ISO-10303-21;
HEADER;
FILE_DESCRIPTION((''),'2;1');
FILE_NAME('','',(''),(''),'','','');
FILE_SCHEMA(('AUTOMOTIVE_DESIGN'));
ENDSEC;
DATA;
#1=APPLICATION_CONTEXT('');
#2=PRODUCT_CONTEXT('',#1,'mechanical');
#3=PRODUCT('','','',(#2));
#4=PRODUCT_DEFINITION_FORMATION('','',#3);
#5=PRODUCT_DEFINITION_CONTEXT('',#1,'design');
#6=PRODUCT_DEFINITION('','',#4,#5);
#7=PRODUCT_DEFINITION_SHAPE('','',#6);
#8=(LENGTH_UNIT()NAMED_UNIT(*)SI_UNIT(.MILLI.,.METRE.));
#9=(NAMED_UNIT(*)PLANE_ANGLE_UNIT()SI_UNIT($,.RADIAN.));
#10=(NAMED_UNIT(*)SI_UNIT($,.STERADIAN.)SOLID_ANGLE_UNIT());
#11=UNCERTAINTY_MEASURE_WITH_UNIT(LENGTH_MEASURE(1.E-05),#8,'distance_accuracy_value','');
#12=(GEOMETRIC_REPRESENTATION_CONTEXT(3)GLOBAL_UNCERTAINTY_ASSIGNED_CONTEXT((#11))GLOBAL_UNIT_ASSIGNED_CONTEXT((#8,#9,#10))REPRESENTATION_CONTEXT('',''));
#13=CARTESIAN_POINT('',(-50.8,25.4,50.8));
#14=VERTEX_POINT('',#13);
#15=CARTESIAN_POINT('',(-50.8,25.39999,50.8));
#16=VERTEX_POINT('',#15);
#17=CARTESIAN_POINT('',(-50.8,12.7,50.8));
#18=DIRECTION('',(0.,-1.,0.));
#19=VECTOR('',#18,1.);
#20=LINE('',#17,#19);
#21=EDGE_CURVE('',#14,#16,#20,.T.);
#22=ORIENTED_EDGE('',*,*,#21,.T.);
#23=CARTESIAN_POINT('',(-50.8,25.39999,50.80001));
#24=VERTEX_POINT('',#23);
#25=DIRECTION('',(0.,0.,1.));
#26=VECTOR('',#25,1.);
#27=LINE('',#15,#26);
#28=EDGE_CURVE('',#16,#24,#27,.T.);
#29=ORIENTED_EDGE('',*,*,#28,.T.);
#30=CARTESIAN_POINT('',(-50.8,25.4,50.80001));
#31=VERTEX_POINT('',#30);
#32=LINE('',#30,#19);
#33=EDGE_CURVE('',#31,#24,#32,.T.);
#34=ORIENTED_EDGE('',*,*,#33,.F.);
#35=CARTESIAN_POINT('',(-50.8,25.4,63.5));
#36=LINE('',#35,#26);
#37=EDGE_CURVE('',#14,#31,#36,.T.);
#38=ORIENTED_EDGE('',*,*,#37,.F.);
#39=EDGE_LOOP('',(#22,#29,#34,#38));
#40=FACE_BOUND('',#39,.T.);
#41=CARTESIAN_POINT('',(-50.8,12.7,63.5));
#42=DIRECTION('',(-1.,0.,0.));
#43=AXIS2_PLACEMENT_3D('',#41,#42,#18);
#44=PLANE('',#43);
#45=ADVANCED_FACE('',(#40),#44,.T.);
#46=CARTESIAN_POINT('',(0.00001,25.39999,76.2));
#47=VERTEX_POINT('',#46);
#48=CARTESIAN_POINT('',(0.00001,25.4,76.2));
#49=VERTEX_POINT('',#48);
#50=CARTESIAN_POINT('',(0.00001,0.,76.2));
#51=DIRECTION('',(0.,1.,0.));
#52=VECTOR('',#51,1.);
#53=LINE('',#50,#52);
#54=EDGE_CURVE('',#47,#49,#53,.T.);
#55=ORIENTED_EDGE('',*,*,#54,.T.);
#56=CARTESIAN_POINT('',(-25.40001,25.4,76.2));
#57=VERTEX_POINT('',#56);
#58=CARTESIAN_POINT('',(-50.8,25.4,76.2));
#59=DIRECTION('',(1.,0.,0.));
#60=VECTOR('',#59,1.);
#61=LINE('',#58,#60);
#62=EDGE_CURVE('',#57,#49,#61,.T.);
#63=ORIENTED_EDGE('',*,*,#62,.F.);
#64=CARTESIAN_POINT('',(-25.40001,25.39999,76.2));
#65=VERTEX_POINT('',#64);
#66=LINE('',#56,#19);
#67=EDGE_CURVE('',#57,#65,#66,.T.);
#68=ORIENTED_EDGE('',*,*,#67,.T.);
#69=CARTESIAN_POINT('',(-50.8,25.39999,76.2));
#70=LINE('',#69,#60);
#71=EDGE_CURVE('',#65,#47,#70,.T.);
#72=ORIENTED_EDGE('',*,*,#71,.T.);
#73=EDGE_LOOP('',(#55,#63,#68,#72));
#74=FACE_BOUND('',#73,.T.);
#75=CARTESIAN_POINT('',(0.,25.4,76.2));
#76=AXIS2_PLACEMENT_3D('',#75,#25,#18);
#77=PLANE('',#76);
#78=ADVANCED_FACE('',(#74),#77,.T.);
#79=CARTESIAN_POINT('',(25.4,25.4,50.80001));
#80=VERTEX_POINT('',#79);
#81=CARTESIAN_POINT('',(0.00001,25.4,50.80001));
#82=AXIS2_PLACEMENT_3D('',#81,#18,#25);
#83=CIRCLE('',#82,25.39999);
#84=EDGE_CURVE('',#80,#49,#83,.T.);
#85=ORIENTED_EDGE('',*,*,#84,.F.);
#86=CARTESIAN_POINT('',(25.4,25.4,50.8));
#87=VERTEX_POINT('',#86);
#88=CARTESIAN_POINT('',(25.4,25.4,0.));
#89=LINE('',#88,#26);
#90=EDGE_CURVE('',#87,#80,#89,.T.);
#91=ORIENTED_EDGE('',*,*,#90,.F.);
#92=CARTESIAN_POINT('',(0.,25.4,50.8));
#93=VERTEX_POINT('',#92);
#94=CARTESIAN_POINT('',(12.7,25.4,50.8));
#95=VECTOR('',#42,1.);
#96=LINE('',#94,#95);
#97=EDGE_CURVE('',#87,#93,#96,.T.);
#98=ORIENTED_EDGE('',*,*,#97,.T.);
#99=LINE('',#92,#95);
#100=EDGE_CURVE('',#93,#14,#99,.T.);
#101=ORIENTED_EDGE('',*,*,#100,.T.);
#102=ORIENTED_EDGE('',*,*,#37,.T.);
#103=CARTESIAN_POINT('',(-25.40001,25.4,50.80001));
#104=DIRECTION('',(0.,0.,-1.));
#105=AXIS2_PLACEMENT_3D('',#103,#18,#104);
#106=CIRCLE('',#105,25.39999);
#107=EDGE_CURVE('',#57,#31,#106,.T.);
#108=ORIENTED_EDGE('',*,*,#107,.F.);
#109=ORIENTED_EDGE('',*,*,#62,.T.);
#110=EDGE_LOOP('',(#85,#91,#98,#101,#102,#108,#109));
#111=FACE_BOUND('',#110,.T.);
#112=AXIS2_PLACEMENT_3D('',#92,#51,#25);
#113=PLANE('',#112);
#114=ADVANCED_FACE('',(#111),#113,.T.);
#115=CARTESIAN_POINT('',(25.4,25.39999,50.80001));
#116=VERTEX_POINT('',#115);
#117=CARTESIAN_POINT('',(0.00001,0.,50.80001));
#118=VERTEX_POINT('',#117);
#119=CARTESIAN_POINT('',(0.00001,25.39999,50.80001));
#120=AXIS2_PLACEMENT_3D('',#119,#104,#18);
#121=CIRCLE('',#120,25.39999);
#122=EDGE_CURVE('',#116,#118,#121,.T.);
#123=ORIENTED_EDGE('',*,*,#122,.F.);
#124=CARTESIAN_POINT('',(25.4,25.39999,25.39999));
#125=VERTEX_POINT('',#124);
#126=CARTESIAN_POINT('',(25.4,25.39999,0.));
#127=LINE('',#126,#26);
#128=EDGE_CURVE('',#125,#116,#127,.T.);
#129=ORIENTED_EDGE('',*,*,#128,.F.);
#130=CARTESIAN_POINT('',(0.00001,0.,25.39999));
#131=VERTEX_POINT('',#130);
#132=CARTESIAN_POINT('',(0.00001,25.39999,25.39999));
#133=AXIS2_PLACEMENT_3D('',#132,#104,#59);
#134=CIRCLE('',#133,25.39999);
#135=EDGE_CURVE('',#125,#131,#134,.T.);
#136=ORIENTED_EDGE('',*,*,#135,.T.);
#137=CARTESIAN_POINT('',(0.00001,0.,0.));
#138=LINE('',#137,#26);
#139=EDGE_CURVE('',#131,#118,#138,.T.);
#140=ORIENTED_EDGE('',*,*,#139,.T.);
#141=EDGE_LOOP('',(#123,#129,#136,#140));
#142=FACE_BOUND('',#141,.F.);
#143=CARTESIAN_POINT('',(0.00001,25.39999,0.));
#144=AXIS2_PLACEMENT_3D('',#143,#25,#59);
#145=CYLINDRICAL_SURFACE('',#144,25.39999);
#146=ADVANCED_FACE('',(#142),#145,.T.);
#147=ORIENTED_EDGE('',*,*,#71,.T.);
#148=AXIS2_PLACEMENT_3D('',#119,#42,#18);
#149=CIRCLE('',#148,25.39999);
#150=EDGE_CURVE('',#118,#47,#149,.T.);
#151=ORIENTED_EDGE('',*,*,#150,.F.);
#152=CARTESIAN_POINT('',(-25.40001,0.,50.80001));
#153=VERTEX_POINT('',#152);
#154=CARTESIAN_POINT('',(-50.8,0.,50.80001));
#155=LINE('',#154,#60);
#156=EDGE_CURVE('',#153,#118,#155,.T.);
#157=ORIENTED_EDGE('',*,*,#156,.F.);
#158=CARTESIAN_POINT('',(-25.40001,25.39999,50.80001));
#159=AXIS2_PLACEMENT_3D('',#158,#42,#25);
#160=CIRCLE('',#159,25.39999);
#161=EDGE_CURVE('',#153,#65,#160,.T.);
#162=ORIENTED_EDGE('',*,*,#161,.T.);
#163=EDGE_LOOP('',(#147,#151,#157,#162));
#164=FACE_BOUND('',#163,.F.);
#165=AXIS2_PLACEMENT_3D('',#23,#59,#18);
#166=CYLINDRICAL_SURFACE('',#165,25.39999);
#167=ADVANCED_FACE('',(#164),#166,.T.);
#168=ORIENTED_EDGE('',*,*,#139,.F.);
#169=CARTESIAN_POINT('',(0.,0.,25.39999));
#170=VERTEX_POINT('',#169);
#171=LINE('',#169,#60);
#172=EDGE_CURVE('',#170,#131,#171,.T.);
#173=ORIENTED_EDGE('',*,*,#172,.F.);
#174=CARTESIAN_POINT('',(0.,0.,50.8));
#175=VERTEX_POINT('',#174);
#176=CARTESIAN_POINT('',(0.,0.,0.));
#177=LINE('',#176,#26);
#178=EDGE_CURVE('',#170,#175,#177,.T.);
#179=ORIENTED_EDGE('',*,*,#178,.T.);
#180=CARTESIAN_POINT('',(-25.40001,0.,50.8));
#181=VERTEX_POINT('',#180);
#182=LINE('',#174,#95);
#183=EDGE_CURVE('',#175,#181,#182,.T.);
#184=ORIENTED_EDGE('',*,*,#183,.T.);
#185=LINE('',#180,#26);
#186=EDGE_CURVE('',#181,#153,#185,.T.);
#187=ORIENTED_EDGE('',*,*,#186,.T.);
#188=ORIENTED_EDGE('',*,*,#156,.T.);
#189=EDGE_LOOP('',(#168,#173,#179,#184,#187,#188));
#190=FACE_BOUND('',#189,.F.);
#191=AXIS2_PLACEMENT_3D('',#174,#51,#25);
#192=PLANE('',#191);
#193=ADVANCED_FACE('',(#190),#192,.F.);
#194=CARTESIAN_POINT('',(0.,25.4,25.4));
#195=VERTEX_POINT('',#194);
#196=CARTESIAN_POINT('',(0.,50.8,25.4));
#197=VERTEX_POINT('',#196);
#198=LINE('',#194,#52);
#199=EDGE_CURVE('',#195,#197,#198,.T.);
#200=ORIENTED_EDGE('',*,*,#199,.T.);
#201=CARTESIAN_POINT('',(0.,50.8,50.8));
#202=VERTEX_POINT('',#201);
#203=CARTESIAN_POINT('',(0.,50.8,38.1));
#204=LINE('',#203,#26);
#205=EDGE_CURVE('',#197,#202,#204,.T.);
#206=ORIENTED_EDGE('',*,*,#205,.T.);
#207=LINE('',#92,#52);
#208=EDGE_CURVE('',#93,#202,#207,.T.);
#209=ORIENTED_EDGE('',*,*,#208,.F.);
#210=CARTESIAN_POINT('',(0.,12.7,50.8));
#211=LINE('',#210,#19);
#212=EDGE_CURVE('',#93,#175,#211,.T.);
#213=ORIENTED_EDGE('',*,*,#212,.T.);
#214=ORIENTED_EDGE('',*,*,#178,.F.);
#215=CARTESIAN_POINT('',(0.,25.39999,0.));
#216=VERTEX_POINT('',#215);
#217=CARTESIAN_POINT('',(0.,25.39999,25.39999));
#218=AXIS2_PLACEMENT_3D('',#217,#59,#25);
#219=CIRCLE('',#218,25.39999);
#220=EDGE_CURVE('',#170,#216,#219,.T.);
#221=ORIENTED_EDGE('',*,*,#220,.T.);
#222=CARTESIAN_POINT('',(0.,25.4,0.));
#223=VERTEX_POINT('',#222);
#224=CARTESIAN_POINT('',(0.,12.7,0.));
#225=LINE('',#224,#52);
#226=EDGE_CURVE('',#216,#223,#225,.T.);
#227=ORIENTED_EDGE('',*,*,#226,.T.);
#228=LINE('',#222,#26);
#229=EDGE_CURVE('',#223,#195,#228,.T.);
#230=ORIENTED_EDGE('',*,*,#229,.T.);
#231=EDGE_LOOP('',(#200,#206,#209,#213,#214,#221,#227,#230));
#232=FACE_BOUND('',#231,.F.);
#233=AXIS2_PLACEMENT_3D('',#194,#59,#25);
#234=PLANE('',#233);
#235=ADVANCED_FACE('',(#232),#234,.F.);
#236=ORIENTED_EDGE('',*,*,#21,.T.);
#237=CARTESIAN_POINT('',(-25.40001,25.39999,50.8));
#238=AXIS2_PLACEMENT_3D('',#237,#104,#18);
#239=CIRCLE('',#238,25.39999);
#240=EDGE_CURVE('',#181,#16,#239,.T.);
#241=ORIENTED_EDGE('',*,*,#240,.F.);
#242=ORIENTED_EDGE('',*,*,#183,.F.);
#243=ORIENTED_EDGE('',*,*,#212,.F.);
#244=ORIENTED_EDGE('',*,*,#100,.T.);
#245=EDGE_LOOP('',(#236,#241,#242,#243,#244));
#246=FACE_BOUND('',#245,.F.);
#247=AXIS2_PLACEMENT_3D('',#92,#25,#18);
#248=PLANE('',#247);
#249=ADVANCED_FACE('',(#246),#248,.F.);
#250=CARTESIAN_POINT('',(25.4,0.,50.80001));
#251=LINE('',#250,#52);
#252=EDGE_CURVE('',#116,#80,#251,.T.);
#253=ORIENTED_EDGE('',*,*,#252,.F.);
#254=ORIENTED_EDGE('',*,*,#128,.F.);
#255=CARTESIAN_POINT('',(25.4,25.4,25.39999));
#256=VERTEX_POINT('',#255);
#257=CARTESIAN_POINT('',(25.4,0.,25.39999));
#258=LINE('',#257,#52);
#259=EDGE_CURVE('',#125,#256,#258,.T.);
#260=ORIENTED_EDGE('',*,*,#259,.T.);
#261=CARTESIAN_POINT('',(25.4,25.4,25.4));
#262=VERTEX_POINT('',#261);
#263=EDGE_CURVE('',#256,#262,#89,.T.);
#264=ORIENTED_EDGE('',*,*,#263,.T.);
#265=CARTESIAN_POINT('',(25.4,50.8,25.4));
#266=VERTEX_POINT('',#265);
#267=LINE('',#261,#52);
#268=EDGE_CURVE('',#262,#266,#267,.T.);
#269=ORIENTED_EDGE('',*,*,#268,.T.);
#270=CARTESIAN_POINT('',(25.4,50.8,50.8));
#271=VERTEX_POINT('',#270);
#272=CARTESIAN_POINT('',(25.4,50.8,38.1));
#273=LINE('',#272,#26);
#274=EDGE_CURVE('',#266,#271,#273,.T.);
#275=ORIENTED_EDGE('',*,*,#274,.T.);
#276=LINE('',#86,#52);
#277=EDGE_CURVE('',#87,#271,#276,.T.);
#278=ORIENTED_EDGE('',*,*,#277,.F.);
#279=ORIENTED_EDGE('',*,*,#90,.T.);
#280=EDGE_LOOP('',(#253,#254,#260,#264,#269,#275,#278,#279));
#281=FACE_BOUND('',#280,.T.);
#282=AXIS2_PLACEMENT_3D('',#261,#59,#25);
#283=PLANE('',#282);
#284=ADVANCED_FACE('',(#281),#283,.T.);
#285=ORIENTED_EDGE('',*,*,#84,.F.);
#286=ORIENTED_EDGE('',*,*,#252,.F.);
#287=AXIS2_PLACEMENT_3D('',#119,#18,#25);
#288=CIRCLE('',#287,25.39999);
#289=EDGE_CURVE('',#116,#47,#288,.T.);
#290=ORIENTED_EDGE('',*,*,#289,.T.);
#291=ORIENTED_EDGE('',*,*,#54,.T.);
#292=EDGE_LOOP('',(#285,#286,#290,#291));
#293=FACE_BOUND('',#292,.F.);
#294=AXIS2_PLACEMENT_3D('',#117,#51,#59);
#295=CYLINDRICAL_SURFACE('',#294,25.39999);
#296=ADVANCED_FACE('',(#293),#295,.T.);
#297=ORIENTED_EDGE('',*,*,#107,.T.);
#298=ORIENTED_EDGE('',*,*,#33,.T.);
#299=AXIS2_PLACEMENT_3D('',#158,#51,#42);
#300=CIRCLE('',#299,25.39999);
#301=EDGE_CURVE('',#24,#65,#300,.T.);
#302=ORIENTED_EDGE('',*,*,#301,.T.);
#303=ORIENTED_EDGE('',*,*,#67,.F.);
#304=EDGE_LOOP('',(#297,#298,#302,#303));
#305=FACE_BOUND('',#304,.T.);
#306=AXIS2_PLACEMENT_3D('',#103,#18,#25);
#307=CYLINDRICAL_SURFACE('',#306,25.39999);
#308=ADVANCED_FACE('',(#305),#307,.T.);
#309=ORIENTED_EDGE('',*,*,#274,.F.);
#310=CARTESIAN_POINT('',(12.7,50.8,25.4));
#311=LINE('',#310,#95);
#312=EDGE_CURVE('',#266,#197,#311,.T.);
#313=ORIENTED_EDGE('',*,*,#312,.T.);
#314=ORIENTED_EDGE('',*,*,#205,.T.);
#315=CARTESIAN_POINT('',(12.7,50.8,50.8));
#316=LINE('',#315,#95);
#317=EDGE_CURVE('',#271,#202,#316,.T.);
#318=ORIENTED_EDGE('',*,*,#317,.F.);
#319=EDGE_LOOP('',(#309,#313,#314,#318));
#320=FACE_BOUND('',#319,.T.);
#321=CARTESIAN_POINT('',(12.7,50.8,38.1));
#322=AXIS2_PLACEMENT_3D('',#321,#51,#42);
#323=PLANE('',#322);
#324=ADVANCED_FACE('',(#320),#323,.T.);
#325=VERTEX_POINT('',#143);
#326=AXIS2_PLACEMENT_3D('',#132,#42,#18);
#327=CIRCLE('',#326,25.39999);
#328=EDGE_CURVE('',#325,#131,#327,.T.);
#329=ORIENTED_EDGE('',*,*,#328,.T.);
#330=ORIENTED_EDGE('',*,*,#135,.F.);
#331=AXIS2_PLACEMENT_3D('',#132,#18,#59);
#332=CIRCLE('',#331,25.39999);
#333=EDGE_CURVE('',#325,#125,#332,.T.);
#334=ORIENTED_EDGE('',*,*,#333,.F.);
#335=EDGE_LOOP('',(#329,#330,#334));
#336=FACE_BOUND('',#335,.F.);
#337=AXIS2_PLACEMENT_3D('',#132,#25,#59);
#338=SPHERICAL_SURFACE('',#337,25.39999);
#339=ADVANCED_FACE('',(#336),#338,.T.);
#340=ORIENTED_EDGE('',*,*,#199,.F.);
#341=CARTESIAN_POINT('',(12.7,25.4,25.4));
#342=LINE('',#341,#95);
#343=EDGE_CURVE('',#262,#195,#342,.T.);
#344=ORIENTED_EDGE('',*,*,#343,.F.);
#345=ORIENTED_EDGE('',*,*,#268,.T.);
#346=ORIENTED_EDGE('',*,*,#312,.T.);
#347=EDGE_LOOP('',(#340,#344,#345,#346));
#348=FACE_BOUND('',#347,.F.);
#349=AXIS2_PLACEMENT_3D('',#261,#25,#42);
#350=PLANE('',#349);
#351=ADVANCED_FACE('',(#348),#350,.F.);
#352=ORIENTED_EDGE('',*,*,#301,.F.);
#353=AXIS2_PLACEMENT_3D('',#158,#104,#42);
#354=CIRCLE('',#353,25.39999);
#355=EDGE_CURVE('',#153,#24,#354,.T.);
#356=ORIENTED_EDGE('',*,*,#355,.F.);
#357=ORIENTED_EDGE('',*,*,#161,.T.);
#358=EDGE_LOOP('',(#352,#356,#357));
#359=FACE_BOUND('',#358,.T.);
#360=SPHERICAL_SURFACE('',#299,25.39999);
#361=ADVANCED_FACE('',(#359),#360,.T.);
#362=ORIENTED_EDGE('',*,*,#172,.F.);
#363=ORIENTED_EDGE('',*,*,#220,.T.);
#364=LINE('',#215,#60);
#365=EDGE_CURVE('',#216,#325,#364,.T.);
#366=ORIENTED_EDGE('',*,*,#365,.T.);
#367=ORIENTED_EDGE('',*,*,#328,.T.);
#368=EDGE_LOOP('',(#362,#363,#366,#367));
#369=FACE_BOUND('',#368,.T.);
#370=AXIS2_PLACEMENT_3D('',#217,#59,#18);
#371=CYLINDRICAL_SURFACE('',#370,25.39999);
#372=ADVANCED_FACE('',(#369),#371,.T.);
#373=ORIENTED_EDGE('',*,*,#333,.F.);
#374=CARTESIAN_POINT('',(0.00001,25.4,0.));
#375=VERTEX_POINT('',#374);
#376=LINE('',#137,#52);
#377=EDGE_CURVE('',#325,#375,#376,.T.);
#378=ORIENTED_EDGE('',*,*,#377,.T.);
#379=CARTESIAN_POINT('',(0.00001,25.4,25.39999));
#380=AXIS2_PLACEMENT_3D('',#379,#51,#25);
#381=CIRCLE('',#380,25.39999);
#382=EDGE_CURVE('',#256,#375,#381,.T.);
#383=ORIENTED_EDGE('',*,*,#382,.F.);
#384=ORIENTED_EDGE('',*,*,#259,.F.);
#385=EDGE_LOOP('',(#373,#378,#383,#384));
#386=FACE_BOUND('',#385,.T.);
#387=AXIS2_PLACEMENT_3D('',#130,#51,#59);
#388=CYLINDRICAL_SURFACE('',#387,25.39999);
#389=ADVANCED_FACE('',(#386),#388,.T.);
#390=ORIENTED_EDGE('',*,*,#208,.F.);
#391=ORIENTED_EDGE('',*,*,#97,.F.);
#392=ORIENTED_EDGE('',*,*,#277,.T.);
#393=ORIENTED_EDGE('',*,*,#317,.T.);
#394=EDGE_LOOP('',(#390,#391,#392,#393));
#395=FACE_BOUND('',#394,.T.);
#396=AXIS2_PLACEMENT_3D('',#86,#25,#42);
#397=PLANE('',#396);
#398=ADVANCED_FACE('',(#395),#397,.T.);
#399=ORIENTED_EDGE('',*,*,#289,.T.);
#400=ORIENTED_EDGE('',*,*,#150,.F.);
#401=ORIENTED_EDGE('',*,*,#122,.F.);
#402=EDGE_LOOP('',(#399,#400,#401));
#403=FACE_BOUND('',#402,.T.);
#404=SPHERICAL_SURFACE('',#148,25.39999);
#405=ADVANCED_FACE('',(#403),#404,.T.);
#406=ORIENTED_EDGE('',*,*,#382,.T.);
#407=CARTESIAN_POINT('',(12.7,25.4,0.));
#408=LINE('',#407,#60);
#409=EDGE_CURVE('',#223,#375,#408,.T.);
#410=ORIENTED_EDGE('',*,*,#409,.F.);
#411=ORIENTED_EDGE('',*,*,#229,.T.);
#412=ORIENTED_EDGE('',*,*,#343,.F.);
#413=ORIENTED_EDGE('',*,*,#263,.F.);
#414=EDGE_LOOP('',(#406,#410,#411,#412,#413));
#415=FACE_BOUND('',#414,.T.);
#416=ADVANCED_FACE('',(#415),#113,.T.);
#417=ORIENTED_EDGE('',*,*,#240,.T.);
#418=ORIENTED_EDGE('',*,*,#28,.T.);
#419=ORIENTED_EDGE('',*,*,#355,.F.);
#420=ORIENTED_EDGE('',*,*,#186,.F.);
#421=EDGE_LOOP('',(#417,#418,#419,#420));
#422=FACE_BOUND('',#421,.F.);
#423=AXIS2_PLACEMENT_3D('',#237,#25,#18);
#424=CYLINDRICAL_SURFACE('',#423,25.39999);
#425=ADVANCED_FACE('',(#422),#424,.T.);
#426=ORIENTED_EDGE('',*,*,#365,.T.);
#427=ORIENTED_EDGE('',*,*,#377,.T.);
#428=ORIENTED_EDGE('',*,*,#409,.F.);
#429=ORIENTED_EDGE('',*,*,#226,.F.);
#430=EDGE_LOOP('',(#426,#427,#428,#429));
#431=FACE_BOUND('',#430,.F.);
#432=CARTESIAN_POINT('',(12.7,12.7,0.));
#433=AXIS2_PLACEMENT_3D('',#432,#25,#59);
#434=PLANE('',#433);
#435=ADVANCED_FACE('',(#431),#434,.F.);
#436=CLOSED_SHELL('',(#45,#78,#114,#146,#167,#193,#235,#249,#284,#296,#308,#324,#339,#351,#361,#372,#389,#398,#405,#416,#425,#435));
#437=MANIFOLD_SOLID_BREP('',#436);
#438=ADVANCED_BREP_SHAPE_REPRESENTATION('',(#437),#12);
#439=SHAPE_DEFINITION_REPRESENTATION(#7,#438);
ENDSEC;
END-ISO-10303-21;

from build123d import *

# Parameters (mm, degrees)
F0_W     = 25.4
F0_H     = 25.4
F1_DEPTH = 76.2
F2_W     = 25.4
F2_H     = 25.4
F3_DEPTH = 50.8
F4_W     = 25.4
F4_H     = 25.4
F5_DEPTH = 25.4
F6_R     = 25.39999


# Not quite as in the source:
# - a fillet or chamfer is up to 0.001 mm smaller than in the source, because OpenCascade refuses the exact size


with BuildPart() as f1:
    # F0 (on Top) → F1 (new body)
    with BuildSketch(Plane.XY):
        with Locations((12.7, 12.7)):
            Rectangle(F0_W, F0_H)
    extrude(amount=F1_DEPTH)

    # F2 (on face) → F3 (join)
    with BuildSketch(Plane(origin=(0, 0, 0), x_dir=(0, -1, 0), z_dir=(-1, 0, 0))):
        with Locations((-12.7, 63.5)):
            Rectangle(F2_W, F2_H)
    extrude(amount=F3_DEPTH)

    # F4 (on face) → F5 (join)
    with BuildSketch(Plane(origin=(0, 25.4, 0), x_dir=(-1, 0, 0), z_dir=(0, 1, 0))):
        with Locations((-12.7, 38.1)):
            Rectangle(F4_W, F4_H)
    extrude(amount=F5_DEPTH)

    # F6 (radius 25.4 in the source; OpenCascade refuses exactly that, so slightly less here)
    f6_edges = [f1.edges().sort_by_distance(p)[0] for p in [
        (-50.8, 12.7, 76.2),
        (-50.8, 0, 63.5),
        (-12.7, 0, 76.2),
        (25.4, 0, 38.1),
        (25.4, 12.7, 0),
        (12.7, 0, 0),
        (25.4, 12.7, 76.2),
    ]]
    fillet(f6_edges, radius=F6_R)


solid = f1.part
